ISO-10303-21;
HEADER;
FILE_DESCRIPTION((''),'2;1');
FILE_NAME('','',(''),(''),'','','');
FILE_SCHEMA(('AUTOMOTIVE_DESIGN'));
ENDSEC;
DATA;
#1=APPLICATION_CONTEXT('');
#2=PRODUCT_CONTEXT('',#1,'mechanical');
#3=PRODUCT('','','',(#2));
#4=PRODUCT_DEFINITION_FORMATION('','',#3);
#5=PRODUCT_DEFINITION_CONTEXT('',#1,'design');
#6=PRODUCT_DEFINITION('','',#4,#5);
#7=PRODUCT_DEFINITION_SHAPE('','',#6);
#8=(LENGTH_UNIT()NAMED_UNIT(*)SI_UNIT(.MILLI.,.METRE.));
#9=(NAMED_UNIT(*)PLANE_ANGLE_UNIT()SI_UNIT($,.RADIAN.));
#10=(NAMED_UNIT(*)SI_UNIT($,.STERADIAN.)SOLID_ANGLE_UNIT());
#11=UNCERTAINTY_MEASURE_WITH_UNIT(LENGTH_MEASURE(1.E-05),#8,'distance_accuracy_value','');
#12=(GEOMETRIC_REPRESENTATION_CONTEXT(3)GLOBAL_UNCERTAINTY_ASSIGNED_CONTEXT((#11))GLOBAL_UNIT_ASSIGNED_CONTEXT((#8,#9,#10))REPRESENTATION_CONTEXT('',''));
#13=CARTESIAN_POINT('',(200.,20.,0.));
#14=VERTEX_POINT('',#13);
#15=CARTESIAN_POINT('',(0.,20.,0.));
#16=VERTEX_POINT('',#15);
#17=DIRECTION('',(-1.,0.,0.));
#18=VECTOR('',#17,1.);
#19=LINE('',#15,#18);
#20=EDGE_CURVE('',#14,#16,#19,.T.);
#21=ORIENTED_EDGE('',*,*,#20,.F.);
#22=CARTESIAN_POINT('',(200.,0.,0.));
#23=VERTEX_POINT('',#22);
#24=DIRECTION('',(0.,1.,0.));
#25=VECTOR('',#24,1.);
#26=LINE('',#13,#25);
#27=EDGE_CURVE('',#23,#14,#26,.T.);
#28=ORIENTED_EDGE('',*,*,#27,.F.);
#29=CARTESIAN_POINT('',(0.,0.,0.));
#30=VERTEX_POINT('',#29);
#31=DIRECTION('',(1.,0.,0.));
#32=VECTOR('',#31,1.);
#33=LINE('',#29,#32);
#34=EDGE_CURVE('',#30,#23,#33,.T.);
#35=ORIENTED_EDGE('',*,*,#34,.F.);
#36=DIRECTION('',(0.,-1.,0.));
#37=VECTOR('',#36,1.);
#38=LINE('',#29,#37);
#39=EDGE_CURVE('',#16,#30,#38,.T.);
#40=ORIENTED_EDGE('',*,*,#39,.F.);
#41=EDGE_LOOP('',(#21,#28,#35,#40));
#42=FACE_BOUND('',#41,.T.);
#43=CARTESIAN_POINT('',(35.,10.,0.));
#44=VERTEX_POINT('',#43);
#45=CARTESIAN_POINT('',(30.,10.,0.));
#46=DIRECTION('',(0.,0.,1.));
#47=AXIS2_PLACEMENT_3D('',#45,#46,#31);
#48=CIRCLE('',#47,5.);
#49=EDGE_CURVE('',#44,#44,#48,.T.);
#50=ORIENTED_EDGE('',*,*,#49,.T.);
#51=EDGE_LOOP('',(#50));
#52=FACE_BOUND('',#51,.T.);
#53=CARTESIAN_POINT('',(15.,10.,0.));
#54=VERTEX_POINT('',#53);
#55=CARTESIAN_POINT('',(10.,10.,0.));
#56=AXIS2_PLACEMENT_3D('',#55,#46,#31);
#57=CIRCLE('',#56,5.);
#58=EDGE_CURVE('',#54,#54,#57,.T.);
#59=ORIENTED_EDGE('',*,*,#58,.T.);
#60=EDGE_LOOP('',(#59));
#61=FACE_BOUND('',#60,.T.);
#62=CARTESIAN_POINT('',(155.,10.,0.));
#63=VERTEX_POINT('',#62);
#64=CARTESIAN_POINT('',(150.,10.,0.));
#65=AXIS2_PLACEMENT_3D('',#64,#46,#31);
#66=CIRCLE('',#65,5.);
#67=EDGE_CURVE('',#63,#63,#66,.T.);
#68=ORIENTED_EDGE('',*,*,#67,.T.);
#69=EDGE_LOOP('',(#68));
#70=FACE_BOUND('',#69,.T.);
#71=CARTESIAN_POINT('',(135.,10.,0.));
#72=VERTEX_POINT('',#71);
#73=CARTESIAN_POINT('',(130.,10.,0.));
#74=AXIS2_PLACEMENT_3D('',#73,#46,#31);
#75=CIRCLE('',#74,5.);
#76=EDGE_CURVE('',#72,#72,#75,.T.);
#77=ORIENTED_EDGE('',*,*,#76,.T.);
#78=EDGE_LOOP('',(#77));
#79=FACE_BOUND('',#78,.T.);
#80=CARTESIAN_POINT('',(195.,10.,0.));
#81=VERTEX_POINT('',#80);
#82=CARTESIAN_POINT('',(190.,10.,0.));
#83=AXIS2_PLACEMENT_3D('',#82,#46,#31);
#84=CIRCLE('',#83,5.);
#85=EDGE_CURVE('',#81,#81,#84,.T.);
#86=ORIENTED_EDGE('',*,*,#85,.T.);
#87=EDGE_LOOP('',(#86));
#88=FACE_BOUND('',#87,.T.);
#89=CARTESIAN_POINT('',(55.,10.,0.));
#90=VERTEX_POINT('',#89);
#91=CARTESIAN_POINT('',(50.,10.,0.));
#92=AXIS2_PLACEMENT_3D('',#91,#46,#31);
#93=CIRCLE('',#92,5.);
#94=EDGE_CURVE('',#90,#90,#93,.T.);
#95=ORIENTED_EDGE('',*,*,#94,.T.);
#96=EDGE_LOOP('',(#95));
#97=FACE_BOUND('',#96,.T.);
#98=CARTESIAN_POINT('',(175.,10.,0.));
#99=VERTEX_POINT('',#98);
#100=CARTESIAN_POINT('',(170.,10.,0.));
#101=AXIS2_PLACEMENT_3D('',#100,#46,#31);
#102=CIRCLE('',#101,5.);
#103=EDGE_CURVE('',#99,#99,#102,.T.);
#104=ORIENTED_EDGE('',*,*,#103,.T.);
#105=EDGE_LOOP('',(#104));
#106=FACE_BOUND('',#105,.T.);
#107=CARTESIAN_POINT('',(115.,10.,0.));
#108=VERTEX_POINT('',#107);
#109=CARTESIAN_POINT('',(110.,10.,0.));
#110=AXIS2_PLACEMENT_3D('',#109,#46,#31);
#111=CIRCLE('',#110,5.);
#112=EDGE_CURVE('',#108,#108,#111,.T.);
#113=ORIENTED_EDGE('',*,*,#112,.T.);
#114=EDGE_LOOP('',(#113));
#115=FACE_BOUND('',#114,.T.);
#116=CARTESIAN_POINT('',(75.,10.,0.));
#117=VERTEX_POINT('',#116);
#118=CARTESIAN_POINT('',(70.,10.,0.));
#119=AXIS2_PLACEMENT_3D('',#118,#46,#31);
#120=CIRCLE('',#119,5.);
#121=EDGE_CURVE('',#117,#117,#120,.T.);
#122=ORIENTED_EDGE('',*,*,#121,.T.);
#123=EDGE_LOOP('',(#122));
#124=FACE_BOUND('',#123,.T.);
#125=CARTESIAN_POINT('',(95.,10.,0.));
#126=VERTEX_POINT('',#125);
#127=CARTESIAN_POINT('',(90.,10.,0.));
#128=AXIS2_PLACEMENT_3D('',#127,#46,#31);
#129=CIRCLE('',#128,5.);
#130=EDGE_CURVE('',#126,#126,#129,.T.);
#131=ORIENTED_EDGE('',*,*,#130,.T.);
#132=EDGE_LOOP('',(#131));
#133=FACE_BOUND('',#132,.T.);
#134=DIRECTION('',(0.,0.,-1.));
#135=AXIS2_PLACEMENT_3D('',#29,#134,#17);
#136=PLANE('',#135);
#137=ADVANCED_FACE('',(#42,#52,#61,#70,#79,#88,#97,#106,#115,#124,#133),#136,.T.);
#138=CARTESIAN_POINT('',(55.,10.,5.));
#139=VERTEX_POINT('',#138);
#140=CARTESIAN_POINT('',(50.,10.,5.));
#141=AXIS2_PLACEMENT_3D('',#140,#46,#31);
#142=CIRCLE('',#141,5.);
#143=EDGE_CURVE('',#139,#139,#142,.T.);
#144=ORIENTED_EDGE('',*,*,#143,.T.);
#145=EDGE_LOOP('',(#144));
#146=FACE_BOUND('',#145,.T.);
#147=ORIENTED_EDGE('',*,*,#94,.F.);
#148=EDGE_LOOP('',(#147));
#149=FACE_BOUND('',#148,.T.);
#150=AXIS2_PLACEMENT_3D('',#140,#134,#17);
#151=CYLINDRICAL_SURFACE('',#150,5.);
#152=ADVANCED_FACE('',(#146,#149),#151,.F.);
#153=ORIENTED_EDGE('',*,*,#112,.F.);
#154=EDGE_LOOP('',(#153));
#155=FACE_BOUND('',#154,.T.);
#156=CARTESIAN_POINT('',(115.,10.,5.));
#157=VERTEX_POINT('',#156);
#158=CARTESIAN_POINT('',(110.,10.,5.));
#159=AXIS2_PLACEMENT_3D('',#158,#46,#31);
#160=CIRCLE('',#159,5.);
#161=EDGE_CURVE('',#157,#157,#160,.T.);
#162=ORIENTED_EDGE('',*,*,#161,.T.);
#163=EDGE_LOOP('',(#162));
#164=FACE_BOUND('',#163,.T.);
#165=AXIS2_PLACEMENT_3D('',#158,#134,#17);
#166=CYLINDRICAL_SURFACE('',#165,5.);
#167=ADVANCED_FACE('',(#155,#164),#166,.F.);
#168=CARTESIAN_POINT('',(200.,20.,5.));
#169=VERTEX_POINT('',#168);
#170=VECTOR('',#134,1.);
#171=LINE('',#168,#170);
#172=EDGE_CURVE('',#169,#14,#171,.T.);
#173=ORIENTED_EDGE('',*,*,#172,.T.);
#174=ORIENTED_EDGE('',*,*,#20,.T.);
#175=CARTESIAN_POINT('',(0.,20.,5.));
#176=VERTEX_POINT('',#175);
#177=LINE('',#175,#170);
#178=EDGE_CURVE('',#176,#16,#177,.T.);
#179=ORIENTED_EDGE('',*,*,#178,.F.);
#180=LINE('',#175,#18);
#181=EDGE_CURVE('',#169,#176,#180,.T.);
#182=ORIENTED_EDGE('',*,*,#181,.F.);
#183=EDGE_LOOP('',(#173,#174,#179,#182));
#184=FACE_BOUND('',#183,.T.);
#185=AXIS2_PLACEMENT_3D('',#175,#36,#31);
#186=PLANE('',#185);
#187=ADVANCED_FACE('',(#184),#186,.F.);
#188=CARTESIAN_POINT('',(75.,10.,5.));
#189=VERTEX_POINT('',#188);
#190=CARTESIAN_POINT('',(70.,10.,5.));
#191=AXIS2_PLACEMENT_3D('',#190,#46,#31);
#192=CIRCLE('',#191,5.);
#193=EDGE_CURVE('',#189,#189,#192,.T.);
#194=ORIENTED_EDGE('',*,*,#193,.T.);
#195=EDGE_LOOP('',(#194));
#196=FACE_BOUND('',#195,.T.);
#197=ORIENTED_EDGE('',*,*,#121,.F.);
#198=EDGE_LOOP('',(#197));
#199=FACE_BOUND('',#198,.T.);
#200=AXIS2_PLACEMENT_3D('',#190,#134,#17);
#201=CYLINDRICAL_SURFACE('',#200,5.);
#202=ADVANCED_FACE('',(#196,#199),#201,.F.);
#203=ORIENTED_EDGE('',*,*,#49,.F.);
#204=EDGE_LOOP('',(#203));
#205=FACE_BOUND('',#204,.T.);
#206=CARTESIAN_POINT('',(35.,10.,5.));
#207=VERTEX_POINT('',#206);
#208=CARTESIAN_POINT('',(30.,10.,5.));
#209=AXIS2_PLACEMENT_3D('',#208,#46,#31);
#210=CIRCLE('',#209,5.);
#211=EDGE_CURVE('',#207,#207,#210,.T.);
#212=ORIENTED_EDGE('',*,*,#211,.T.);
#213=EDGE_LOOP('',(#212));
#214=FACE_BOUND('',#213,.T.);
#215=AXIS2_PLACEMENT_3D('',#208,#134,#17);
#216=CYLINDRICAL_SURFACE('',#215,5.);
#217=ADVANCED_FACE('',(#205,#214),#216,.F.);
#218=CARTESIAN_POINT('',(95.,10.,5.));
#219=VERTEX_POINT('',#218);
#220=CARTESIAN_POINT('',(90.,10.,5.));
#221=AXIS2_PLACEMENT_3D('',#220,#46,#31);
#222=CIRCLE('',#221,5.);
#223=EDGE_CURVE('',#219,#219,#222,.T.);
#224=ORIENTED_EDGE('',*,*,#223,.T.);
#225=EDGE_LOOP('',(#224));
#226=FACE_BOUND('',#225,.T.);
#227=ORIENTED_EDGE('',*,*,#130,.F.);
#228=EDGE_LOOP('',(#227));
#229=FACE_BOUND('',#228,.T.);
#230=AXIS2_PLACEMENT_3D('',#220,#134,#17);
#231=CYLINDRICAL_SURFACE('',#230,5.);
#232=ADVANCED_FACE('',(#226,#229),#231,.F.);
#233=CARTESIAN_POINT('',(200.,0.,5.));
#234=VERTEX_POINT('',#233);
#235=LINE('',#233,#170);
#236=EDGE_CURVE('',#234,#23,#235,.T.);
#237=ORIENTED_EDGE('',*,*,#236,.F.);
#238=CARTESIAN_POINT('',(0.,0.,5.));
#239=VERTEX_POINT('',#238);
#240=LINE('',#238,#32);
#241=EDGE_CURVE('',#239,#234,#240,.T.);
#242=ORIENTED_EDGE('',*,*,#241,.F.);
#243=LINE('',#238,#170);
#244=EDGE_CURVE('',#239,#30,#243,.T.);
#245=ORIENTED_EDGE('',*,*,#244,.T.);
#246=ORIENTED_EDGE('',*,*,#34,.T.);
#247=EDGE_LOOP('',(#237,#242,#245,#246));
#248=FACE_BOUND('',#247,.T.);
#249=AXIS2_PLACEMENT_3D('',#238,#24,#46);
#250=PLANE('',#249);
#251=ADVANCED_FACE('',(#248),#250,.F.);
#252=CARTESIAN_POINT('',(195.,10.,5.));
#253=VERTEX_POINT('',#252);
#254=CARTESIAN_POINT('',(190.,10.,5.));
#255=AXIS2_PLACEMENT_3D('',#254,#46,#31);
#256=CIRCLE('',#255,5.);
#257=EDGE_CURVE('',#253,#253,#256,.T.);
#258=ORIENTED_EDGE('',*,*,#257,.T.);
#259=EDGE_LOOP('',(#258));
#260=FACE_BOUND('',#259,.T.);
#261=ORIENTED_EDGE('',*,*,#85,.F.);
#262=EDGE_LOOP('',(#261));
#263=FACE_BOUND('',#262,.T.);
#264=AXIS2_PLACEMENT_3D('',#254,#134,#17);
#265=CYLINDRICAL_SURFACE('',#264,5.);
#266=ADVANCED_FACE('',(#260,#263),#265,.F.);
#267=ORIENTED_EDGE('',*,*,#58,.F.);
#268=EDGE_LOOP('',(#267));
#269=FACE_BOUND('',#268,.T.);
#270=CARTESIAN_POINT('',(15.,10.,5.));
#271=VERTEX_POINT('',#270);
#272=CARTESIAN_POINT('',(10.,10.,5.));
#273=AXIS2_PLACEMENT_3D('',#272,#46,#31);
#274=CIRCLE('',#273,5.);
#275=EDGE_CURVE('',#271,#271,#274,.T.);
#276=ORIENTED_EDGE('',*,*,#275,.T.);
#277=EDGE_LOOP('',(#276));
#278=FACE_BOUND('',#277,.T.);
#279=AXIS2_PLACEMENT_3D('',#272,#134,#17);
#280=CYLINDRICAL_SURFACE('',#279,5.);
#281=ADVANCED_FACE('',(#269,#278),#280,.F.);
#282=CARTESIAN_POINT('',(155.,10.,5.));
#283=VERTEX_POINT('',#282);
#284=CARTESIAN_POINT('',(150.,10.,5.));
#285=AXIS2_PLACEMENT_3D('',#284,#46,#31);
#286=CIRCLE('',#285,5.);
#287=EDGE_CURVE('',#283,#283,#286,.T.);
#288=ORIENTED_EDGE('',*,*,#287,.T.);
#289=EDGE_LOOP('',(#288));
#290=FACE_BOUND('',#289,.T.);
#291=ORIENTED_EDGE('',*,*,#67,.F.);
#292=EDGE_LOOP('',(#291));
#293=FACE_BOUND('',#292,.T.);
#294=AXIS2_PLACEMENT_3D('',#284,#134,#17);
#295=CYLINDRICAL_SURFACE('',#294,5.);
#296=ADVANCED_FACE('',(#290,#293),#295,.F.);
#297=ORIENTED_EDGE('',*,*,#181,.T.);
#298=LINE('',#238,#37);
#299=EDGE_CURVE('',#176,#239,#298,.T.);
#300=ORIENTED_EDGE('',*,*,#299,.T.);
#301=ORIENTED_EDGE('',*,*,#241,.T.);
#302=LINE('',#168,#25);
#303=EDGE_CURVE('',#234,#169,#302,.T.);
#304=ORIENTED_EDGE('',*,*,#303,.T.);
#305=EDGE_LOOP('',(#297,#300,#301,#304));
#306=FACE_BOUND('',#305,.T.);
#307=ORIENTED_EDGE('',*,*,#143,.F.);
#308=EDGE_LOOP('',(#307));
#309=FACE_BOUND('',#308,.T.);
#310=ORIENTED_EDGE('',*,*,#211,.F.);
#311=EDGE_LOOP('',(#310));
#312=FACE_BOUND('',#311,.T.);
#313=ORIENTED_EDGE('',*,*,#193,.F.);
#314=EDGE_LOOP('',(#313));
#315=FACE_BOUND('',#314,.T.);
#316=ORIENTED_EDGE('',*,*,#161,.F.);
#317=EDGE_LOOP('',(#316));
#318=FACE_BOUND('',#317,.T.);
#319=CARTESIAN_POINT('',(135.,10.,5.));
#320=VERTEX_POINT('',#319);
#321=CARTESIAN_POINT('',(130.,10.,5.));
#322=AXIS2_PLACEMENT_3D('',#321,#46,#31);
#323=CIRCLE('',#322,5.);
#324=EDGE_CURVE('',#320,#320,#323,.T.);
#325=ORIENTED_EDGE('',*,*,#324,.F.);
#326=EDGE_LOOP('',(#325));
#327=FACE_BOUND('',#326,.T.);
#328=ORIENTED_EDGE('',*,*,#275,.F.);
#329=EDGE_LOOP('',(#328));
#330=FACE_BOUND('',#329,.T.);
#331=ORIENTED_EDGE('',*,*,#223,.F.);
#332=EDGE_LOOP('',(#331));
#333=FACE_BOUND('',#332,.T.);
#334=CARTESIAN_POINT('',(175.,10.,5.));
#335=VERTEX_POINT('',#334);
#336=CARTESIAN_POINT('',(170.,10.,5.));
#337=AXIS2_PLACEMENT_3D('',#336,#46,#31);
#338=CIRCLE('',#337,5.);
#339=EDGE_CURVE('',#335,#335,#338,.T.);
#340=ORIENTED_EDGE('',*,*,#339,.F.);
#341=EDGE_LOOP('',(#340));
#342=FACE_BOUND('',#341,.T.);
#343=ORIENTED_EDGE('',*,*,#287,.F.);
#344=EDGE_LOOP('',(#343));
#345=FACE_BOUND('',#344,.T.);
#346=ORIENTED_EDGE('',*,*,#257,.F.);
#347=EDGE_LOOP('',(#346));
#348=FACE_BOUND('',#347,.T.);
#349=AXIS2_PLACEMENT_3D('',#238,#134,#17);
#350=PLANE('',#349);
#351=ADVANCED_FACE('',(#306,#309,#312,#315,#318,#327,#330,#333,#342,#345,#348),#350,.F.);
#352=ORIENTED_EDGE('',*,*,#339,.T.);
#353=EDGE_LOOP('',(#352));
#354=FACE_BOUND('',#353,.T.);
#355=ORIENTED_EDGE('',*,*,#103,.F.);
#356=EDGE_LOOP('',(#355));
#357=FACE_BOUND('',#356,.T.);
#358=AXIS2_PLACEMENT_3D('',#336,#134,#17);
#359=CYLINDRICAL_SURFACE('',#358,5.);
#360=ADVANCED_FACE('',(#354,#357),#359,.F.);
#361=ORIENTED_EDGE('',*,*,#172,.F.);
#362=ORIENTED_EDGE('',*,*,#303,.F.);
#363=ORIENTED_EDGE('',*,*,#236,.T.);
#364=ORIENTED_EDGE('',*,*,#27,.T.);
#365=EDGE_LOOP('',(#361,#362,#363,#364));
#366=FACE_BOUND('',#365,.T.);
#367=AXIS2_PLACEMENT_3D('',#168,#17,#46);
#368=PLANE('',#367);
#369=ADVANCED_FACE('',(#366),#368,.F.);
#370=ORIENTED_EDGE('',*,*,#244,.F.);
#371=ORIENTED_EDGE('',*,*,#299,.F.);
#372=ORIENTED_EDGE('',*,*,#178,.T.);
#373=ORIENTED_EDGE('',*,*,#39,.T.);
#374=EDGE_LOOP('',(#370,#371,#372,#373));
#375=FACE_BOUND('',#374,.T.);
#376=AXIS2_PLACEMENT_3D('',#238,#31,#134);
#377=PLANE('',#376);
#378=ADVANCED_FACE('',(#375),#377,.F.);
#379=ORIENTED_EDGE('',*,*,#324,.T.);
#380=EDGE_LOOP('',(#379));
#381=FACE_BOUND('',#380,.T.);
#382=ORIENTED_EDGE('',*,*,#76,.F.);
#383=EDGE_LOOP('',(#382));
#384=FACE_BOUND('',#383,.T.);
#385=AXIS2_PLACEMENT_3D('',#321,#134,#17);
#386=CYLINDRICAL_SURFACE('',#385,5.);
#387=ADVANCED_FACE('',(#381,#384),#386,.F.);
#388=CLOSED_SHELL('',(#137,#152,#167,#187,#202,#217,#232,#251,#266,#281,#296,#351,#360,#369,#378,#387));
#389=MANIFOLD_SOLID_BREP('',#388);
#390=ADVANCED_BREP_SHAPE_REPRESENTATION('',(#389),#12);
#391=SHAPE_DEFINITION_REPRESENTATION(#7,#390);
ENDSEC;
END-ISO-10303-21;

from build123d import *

# Parameters (mm, degrees)
SZKIC2_W                    = 200
SZKIC2_H                    = 20
SZKIC2_R                    = 5
DODANIE_WYCI_GNI_CIE5_DEPTH = 5
SZYK_LINIOWY1_OUTLINE_R     = 5
SZYK_LINIOWY1_DEPTH         = 5


# Read off the part's stored shape, not the designer's step: Szyk liniowy1
with BuildPart() as part:
    # Szkic2 → Dodanie-wyciągnięcie5 (new body)
    with BuildSketch(Plane.XY):
        with Locations((100, 10)):
            Rectangle(SZKIC2_W, SZKIC2_H)
        with Locations((10, 10)):
            Circle(SZKIC2_R, mode=Mode.SUBTRACT)
    extrude(amount=DODANIE_WYCI_GNI_CIE5_DEPTH)

    # Szyk liniowy1 outline → Szyk liniowy1 (cut)
    with BuildSketch(Plane.XY):
        with Locations((190, 10)):
            Circle(SZYK_LINIOWY1_OUTLINE_R)
        with Locations((170, 10)):
            Circle(SZYK_LINIOWY1_OUTLINE_R)
        with Locations((150, 10)):
            Circle(SZYK_LINIOWY1_OUTLINE_R)
        with Locations((130, 10)):
            Circle(SZYK_LINIOWY1_OUTLINE_R)
        with Locations((110, 10)):
            Circle(SZYK_LINIOWY1_OUTLINE_R)
        with Locations((90, 10)):
            Circle(SZYK_LINIOWY1_OUTLINE_R)
        with Locations((70, 10)):
            Circle(SZYK_LINIOWY1_OUTLINE_R)
        with Locations((50, 10)):
            Circle(SZYK_LINIOWY1_OUTLINE_R)
        with Locations((30, 10)):
            Circle(SZYK_LINIOWY1_OUTLINE_R)
    extrude(amount=SZYK_LINIOWY1_DEPTH, mode=Mode.SUBTRACT)


solid = part.part
